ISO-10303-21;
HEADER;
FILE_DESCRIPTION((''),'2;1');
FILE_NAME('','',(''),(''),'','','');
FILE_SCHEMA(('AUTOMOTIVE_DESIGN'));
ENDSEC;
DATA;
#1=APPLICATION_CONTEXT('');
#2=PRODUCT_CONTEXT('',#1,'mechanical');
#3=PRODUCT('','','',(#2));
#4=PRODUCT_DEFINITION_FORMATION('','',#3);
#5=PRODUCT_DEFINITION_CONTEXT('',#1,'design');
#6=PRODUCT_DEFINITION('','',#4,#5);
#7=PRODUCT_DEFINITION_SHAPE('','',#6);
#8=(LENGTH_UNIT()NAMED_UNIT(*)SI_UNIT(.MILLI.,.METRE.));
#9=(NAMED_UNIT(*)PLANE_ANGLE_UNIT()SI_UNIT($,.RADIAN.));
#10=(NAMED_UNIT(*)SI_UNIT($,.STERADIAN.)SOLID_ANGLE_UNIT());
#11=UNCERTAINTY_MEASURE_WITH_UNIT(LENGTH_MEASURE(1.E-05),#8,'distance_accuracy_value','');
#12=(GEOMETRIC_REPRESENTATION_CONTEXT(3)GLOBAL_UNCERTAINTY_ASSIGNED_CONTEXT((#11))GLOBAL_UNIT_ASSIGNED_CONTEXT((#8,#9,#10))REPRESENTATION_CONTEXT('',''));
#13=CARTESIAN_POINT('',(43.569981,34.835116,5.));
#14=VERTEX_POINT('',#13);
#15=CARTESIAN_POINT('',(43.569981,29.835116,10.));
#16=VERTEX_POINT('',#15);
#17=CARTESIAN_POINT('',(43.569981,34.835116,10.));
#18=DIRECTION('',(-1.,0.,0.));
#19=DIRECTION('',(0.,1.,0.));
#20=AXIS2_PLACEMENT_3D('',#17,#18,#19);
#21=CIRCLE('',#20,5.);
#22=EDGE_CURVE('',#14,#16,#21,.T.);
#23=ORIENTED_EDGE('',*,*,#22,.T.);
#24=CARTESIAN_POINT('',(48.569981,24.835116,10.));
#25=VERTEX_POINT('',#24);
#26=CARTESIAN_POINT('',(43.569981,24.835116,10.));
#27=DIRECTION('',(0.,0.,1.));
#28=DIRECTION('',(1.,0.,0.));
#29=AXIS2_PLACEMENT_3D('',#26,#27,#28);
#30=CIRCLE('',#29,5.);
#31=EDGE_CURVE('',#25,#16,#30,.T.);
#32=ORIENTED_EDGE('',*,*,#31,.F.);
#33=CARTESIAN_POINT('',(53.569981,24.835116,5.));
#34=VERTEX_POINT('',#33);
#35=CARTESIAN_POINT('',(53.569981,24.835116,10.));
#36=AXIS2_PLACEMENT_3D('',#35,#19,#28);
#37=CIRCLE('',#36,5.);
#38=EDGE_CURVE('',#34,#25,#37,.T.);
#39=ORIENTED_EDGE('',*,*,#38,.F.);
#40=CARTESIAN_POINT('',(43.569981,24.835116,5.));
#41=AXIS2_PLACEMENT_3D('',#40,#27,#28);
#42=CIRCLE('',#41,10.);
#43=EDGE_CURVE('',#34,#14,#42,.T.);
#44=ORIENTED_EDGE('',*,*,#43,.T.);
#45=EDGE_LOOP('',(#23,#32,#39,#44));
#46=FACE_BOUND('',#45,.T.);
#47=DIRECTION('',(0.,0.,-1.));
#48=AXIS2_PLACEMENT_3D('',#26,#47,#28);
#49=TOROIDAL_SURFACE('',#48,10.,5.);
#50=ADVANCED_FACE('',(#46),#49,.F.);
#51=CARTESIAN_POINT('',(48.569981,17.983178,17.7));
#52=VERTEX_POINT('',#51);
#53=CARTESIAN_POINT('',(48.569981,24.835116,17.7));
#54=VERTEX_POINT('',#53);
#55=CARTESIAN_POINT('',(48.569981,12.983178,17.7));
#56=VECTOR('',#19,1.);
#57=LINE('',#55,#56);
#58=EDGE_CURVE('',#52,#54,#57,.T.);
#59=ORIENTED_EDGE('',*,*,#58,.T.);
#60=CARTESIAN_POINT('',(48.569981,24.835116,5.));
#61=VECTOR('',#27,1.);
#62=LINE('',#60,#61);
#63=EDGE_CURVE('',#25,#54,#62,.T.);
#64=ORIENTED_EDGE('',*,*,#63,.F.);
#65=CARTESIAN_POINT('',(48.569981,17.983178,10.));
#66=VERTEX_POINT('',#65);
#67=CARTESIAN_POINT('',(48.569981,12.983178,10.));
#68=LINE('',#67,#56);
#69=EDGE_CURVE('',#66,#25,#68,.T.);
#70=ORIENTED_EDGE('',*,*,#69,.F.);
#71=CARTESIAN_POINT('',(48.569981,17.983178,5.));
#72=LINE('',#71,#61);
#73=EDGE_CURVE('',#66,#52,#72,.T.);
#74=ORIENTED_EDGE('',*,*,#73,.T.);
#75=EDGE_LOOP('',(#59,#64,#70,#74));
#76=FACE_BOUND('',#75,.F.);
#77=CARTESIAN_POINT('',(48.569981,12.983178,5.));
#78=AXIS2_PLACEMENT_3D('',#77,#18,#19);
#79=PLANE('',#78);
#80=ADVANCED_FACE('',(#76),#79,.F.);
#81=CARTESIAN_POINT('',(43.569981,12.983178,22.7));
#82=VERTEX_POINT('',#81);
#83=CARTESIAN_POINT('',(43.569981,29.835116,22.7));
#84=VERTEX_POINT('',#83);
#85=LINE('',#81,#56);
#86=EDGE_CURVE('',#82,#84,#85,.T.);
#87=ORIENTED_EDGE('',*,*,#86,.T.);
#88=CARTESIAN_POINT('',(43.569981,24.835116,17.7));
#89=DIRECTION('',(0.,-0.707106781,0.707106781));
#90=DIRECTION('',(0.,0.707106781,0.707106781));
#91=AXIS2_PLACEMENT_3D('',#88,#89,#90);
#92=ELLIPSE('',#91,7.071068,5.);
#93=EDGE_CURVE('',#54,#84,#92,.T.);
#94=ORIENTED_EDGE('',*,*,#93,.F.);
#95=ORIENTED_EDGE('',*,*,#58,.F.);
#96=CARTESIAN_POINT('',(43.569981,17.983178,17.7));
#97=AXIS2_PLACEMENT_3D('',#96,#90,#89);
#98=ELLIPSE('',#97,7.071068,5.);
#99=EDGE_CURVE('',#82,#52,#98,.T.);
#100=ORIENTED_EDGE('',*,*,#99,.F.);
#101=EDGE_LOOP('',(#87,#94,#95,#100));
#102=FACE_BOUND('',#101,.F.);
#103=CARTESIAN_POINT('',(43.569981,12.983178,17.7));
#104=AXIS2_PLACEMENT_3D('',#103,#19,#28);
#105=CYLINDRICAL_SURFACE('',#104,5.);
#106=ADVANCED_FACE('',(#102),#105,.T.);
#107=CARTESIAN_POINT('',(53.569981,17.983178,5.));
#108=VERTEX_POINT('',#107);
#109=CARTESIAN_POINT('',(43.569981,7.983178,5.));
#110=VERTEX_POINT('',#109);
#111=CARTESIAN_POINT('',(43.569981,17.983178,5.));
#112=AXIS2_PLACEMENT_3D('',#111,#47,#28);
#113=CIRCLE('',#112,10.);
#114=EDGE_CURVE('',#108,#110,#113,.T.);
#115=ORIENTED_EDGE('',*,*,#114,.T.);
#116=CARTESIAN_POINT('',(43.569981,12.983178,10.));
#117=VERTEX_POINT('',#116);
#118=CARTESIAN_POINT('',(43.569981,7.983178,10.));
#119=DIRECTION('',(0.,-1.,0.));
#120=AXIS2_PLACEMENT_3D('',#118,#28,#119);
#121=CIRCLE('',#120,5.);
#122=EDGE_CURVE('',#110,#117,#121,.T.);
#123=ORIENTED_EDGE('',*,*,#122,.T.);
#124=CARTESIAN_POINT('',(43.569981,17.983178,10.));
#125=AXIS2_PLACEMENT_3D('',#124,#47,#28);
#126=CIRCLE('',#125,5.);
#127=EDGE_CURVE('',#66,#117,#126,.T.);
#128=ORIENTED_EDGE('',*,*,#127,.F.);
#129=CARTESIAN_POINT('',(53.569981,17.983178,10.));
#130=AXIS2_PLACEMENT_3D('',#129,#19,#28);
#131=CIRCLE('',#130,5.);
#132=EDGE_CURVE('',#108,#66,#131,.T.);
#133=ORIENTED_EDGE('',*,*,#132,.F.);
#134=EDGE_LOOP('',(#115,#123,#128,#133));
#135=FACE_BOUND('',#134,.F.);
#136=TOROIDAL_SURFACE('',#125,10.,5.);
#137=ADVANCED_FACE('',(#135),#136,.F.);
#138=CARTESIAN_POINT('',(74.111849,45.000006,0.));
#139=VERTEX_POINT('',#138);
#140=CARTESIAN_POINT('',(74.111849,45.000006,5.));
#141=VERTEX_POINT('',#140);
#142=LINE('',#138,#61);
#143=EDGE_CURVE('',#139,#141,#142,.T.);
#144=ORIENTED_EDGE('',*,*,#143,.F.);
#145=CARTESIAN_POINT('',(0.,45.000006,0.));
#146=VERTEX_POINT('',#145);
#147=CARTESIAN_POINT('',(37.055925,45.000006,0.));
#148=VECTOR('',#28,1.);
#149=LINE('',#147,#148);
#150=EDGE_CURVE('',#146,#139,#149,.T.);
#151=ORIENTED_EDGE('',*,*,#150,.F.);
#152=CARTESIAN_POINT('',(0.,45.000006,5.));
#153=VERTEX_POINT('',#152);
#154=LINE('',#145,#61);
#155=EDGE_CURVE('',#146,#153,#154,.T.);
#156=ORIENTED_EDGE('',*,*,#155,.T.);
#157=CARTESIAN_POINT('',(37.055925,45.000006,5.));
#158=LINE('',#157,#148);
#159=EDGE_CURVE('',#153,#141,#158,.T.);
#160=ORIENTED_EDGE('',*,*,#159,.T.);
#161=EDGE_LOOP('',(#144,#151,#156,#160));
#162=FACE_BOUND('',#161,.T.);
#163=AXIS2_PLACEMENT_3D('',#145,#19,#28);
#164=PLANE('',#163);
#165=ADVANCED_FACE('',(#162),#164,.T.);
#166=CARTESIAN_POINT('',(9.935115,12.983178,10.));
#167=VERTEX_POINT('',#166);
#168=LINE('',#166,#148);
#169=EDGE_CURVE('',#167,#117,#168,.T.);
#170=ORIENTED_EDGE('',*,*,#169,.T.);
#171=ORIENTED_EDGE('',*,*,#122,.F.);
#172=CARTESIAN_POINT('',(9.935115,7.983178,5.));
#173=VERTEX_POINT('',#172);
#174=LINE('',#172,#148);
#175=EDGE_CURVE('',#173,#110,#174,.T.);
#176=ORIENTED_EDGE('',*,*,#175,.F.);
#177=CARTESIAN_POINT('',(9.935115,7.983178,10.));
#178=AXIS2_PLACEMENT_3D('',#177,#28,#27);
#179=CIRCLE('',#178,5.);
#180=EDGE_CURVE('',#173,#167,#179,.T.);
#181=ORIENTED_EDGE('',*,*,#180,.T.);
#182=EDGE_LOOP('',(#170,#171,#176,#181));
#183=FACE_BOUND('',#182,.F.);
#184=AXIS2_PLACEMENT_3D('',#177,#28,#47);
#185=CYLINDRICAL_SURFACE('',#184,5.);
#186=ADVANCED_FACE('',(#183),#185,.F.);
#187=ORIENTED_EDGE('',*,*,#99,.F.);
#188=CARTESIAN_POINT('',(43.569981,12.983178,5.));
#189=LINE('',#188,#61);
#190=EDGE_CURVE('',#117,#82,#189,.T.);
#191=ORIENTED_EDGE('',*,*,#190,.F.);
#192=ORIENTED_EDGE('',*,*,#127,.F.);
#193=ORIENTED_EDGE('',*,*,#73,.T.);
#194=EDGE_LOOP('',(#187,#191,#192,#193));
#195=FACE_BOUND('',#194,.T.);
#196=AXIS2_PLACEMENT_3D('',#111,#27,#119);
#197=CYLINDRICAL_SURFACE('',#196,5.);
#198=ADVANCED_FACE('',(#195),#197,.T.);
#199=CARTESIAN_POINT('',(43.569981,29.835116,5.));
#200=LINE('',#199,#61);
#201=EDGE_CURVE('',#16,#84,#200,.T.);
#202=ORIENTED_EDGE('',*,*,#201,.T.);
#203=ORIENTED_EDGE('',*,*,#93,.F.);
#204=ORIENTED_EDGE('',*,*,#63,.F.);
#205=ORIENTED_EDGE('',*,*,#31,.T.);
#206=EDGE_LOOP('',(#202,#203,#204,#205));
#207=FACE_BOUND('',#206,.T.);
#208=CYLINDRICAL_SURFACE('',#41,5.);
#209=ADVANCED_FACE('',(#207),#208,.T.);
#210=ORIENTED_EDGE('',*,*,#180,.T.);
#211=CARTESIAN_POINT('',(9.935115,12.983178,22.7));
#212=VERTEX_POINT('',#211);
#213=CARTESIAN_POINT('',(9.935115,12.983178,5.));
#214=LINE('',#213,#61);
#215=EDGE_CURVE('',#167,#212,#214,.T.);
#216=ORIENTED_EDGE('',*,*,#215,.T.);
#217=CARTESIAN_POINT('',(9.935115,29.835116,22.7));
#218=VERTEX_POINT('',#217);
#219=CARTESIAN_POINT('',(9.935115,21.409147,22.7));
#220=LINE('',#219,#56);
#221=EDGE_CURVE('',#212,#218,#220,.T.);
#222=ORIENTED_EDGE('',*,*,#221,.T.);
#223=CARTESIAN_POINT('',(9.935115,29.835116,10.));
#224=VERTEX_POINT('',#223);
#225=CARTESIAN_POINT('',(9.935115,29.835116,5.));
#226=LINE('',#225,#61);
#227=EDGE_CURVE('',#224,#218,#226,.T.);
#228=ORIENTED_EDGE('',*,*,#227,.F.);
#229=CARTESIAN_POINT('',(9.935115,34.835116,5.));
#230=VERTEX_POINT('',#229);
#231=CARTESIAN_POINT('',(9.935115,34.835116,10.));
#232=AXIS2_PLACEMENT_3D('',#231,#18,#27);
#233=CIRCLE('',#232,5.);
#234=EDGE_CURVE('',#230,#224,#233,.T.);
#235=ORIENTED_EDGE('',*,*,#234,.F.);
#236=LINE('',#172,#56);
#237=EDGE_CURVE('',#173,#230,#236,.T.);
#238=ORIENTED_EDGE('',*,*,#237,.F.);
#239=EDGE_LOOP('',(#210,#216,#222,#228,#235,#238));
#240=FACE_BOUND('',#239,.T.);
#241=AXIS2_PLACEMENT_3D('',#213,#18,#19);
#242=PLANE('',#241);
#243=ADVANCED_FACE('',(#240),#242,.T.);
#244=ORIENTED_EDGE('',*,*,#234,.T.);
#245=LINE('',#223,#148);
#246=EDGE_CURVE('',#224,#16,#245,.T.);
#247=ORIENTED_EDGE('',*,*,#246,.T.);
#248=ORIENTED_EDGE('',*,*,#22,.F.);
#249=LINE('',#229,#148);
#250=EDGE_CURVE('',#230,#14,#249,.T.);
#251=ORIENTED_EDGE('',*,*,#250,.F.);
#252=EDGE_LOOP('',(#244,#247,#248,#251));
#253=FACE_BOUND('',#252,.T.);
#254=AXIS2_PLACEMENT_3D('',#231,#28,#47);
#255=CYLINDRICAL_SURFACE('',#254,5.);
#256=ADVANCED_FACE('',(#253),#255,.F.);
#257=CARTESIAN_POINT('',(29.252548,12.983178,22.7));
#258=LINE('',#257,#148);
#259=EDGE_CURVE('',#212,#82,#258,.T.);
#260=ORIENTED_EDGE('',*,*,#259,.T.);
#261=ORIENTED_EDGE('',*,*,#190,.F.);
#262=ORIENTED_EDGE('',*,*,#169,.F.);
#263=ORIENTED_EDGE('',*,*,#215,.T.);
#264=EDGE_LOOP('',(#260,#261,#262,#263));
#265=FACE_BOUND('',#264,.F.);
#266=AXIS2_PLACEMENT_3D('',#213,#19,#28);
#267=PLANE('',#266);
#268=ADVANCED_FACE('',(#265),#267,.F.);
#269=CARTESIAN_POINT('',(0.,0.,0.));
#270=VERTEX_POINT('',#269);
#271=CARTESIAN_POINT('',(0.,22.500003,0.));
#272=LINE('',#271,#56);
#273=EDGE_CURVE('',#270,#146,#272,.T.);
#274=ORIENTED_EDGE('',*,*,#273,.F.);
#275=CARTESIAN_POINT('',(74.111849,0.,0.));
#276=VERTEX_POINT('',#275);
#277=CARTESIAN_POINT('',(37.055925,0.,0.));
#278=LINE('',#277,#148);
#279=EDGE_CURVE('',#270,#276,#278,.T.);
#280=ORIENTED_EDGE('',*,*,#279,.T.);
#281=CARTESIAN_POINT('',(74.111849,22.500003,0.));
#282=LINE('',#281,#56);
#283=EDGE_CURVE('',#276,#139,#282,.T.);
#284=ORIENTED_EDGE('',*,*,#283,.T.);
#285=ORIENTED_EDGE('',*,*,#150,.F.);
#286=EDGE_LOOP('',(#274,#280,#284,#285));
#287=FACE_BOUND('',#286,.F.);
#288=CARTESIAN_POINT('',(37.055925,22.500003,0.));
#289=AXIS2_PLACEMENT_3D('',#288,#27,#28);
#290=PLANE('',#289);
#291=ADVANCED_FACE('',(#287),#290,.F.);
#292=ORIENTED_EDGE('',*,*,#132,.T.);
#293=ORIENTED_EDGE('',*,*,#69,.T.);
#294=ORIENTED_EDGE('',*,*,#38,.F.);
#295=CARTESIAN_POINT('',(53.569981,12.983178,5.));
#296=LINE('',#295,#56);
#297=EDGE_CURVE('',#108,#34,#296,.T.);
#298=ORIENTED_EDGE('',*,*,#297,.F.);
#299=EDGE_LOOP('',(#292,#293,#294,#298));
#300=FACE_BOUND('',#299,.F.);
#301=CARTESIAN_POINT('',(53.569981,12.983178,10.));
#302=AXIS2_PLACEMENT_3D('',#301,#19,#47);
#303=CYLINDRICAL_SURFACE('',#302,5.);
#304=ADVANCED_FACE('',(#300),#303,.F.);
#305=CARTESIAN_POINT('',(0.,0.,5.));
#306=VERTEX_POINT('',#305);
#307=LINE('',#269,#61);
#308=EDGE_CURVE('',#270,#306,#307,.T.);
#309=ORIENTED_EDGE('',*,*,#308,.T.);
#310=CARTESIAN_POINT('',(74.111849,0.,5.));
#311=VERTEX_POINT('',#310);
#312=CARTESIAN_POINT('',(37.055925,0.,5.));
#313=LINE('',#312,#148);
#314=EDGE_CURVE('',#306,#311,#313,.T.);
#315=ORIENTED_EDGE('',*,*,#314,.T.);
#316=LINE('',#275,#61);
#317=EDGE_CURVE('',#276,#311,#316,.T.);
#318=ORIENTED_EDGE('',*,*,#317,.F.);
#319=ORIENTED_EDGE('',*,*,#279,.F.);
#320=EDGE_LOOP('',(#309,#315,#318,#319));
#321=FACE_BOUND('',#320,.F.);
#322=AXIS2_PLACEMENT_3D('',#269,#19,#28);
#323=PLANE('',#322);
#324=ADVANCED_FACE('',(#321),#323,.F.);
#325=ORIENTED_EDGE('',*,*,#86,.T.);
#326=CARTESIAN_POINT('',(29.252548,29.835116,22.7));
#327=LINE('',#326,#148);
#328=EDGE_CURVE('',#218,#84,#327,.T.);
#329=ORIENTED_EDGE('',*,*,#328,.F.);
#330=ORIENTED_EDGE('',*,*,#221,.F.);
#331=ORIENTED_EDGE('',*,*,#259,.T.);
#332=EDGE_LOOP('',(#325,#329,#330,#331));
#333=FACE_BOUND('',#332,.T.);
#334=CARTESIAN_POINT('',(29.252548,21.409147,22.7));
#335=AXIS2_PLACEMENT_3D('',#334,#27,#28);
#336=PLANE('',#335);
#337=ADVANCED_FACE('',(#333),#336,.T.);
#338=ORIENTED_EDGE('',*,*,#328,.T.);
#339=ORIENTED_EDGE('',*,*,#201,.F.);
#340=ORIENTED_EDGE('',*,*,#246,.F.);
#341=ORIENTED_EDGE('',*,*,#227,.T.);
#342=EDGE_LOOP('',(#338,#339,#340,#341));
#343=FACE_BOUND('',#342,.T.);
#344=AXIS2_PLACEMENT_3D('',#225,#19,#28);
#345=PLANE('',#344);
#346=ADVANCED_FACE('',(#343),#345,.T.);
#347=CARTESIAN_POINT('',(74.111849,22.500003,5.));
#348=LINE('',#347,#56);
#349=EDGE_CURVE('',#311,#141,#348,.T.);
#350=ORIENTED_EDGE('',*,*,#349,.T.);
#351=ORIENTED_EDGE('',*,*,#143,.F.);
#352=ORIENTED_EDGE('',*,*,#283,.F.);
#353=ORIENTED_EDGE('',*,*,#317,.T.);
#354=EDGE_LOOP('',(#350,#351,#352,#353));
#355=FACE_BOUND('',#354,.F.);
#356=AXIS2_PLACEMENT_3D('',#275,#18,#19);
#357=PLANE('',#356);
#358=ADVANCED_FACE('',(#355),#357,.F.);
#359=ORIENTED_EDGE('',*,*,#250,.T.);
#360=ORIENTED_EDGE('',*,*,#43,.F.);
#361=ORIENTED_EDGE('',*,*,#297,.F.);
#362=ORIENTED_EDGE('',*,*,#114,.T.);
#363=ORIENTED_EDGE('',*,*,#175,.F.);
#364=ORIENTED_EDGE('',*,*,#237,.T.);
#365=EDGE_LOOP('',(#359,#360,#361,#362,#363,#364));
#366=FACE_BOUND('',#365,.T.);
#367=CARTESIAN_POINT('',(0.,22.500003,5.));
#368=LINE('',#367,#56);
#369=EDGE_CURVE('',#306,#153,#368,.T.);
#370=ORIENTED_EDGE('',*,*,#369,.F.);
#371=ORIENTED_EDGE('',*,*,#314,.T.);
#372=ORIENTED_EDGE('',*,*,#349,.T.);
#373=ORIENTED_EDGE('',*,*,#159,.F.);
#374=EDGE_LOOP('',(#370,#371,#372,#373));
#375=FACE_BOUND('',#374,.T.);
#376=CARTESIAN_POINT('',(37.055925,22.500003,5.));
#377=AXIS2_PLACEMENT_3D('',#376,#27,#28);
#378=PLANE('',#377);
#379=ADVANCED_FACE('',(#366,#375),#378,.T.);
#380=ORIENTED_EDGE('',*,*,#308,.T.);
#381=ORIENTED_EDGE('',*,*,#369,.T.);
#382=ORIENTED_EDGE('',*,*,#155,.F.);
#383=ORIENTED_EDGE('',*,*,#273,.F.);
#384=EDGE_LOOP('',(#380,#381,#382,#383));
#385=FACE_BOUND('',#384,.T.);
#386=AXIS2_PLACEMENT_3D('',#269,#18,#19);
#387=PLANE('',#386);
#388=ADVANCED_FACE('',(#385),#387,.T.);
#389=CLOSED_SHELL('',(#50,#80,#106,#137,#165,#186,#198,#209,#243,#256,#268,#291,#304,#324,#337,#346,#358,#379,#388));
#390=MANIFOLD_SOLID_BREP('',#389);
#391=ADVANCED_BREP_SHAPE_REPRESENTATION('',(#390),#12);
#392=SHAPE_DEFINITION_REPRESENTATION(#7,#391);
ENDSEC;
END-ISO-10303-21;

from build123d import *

# Parameters (mm, degrees)
F0_W     = 74.1118490696
F0_H     = 45.0000055134
F1_DEPTH = 5
F3_W     = 38.6348655447
F3_H     = 16.8519383296
F4_DEPTH = 17.7
F5_R     = 5


with BuildPart() as f1:
    # F0 (on Top) → F1 (new body)
    with BuildSketch(Plane.XY):
        with Locations((37.0559245348, 22.5000027567)):
            Rectangle(F0_W, F0_H)
    extrude(amount=F1_DEPTH)

    # F3 (on face) → F4 (join)
    with BuildSketch(Plane.XY.offset(5)):
        with Locations((29.2525482364, 21.4091469534)):
            Rectangle(F3_W, F3_H)
    extrude(amount=F4_DEPTH)

    # F5
    f5_edges = [f1.edges().sort_by_distance(p)[0] for p in [
        (48.569981, 12.983178, 13.85),
        (48.569981, 29.835116, 13.85),
        (48.569981, 21.409147, 5),
        (48.569981, 21.409147, 22.7),
        (29.252548, 12.983178, 5),
        (29.252548, 29.835116, 5),
    ]]
    fillet(f5_edges, radius=F5_R)


solid = f1.part
